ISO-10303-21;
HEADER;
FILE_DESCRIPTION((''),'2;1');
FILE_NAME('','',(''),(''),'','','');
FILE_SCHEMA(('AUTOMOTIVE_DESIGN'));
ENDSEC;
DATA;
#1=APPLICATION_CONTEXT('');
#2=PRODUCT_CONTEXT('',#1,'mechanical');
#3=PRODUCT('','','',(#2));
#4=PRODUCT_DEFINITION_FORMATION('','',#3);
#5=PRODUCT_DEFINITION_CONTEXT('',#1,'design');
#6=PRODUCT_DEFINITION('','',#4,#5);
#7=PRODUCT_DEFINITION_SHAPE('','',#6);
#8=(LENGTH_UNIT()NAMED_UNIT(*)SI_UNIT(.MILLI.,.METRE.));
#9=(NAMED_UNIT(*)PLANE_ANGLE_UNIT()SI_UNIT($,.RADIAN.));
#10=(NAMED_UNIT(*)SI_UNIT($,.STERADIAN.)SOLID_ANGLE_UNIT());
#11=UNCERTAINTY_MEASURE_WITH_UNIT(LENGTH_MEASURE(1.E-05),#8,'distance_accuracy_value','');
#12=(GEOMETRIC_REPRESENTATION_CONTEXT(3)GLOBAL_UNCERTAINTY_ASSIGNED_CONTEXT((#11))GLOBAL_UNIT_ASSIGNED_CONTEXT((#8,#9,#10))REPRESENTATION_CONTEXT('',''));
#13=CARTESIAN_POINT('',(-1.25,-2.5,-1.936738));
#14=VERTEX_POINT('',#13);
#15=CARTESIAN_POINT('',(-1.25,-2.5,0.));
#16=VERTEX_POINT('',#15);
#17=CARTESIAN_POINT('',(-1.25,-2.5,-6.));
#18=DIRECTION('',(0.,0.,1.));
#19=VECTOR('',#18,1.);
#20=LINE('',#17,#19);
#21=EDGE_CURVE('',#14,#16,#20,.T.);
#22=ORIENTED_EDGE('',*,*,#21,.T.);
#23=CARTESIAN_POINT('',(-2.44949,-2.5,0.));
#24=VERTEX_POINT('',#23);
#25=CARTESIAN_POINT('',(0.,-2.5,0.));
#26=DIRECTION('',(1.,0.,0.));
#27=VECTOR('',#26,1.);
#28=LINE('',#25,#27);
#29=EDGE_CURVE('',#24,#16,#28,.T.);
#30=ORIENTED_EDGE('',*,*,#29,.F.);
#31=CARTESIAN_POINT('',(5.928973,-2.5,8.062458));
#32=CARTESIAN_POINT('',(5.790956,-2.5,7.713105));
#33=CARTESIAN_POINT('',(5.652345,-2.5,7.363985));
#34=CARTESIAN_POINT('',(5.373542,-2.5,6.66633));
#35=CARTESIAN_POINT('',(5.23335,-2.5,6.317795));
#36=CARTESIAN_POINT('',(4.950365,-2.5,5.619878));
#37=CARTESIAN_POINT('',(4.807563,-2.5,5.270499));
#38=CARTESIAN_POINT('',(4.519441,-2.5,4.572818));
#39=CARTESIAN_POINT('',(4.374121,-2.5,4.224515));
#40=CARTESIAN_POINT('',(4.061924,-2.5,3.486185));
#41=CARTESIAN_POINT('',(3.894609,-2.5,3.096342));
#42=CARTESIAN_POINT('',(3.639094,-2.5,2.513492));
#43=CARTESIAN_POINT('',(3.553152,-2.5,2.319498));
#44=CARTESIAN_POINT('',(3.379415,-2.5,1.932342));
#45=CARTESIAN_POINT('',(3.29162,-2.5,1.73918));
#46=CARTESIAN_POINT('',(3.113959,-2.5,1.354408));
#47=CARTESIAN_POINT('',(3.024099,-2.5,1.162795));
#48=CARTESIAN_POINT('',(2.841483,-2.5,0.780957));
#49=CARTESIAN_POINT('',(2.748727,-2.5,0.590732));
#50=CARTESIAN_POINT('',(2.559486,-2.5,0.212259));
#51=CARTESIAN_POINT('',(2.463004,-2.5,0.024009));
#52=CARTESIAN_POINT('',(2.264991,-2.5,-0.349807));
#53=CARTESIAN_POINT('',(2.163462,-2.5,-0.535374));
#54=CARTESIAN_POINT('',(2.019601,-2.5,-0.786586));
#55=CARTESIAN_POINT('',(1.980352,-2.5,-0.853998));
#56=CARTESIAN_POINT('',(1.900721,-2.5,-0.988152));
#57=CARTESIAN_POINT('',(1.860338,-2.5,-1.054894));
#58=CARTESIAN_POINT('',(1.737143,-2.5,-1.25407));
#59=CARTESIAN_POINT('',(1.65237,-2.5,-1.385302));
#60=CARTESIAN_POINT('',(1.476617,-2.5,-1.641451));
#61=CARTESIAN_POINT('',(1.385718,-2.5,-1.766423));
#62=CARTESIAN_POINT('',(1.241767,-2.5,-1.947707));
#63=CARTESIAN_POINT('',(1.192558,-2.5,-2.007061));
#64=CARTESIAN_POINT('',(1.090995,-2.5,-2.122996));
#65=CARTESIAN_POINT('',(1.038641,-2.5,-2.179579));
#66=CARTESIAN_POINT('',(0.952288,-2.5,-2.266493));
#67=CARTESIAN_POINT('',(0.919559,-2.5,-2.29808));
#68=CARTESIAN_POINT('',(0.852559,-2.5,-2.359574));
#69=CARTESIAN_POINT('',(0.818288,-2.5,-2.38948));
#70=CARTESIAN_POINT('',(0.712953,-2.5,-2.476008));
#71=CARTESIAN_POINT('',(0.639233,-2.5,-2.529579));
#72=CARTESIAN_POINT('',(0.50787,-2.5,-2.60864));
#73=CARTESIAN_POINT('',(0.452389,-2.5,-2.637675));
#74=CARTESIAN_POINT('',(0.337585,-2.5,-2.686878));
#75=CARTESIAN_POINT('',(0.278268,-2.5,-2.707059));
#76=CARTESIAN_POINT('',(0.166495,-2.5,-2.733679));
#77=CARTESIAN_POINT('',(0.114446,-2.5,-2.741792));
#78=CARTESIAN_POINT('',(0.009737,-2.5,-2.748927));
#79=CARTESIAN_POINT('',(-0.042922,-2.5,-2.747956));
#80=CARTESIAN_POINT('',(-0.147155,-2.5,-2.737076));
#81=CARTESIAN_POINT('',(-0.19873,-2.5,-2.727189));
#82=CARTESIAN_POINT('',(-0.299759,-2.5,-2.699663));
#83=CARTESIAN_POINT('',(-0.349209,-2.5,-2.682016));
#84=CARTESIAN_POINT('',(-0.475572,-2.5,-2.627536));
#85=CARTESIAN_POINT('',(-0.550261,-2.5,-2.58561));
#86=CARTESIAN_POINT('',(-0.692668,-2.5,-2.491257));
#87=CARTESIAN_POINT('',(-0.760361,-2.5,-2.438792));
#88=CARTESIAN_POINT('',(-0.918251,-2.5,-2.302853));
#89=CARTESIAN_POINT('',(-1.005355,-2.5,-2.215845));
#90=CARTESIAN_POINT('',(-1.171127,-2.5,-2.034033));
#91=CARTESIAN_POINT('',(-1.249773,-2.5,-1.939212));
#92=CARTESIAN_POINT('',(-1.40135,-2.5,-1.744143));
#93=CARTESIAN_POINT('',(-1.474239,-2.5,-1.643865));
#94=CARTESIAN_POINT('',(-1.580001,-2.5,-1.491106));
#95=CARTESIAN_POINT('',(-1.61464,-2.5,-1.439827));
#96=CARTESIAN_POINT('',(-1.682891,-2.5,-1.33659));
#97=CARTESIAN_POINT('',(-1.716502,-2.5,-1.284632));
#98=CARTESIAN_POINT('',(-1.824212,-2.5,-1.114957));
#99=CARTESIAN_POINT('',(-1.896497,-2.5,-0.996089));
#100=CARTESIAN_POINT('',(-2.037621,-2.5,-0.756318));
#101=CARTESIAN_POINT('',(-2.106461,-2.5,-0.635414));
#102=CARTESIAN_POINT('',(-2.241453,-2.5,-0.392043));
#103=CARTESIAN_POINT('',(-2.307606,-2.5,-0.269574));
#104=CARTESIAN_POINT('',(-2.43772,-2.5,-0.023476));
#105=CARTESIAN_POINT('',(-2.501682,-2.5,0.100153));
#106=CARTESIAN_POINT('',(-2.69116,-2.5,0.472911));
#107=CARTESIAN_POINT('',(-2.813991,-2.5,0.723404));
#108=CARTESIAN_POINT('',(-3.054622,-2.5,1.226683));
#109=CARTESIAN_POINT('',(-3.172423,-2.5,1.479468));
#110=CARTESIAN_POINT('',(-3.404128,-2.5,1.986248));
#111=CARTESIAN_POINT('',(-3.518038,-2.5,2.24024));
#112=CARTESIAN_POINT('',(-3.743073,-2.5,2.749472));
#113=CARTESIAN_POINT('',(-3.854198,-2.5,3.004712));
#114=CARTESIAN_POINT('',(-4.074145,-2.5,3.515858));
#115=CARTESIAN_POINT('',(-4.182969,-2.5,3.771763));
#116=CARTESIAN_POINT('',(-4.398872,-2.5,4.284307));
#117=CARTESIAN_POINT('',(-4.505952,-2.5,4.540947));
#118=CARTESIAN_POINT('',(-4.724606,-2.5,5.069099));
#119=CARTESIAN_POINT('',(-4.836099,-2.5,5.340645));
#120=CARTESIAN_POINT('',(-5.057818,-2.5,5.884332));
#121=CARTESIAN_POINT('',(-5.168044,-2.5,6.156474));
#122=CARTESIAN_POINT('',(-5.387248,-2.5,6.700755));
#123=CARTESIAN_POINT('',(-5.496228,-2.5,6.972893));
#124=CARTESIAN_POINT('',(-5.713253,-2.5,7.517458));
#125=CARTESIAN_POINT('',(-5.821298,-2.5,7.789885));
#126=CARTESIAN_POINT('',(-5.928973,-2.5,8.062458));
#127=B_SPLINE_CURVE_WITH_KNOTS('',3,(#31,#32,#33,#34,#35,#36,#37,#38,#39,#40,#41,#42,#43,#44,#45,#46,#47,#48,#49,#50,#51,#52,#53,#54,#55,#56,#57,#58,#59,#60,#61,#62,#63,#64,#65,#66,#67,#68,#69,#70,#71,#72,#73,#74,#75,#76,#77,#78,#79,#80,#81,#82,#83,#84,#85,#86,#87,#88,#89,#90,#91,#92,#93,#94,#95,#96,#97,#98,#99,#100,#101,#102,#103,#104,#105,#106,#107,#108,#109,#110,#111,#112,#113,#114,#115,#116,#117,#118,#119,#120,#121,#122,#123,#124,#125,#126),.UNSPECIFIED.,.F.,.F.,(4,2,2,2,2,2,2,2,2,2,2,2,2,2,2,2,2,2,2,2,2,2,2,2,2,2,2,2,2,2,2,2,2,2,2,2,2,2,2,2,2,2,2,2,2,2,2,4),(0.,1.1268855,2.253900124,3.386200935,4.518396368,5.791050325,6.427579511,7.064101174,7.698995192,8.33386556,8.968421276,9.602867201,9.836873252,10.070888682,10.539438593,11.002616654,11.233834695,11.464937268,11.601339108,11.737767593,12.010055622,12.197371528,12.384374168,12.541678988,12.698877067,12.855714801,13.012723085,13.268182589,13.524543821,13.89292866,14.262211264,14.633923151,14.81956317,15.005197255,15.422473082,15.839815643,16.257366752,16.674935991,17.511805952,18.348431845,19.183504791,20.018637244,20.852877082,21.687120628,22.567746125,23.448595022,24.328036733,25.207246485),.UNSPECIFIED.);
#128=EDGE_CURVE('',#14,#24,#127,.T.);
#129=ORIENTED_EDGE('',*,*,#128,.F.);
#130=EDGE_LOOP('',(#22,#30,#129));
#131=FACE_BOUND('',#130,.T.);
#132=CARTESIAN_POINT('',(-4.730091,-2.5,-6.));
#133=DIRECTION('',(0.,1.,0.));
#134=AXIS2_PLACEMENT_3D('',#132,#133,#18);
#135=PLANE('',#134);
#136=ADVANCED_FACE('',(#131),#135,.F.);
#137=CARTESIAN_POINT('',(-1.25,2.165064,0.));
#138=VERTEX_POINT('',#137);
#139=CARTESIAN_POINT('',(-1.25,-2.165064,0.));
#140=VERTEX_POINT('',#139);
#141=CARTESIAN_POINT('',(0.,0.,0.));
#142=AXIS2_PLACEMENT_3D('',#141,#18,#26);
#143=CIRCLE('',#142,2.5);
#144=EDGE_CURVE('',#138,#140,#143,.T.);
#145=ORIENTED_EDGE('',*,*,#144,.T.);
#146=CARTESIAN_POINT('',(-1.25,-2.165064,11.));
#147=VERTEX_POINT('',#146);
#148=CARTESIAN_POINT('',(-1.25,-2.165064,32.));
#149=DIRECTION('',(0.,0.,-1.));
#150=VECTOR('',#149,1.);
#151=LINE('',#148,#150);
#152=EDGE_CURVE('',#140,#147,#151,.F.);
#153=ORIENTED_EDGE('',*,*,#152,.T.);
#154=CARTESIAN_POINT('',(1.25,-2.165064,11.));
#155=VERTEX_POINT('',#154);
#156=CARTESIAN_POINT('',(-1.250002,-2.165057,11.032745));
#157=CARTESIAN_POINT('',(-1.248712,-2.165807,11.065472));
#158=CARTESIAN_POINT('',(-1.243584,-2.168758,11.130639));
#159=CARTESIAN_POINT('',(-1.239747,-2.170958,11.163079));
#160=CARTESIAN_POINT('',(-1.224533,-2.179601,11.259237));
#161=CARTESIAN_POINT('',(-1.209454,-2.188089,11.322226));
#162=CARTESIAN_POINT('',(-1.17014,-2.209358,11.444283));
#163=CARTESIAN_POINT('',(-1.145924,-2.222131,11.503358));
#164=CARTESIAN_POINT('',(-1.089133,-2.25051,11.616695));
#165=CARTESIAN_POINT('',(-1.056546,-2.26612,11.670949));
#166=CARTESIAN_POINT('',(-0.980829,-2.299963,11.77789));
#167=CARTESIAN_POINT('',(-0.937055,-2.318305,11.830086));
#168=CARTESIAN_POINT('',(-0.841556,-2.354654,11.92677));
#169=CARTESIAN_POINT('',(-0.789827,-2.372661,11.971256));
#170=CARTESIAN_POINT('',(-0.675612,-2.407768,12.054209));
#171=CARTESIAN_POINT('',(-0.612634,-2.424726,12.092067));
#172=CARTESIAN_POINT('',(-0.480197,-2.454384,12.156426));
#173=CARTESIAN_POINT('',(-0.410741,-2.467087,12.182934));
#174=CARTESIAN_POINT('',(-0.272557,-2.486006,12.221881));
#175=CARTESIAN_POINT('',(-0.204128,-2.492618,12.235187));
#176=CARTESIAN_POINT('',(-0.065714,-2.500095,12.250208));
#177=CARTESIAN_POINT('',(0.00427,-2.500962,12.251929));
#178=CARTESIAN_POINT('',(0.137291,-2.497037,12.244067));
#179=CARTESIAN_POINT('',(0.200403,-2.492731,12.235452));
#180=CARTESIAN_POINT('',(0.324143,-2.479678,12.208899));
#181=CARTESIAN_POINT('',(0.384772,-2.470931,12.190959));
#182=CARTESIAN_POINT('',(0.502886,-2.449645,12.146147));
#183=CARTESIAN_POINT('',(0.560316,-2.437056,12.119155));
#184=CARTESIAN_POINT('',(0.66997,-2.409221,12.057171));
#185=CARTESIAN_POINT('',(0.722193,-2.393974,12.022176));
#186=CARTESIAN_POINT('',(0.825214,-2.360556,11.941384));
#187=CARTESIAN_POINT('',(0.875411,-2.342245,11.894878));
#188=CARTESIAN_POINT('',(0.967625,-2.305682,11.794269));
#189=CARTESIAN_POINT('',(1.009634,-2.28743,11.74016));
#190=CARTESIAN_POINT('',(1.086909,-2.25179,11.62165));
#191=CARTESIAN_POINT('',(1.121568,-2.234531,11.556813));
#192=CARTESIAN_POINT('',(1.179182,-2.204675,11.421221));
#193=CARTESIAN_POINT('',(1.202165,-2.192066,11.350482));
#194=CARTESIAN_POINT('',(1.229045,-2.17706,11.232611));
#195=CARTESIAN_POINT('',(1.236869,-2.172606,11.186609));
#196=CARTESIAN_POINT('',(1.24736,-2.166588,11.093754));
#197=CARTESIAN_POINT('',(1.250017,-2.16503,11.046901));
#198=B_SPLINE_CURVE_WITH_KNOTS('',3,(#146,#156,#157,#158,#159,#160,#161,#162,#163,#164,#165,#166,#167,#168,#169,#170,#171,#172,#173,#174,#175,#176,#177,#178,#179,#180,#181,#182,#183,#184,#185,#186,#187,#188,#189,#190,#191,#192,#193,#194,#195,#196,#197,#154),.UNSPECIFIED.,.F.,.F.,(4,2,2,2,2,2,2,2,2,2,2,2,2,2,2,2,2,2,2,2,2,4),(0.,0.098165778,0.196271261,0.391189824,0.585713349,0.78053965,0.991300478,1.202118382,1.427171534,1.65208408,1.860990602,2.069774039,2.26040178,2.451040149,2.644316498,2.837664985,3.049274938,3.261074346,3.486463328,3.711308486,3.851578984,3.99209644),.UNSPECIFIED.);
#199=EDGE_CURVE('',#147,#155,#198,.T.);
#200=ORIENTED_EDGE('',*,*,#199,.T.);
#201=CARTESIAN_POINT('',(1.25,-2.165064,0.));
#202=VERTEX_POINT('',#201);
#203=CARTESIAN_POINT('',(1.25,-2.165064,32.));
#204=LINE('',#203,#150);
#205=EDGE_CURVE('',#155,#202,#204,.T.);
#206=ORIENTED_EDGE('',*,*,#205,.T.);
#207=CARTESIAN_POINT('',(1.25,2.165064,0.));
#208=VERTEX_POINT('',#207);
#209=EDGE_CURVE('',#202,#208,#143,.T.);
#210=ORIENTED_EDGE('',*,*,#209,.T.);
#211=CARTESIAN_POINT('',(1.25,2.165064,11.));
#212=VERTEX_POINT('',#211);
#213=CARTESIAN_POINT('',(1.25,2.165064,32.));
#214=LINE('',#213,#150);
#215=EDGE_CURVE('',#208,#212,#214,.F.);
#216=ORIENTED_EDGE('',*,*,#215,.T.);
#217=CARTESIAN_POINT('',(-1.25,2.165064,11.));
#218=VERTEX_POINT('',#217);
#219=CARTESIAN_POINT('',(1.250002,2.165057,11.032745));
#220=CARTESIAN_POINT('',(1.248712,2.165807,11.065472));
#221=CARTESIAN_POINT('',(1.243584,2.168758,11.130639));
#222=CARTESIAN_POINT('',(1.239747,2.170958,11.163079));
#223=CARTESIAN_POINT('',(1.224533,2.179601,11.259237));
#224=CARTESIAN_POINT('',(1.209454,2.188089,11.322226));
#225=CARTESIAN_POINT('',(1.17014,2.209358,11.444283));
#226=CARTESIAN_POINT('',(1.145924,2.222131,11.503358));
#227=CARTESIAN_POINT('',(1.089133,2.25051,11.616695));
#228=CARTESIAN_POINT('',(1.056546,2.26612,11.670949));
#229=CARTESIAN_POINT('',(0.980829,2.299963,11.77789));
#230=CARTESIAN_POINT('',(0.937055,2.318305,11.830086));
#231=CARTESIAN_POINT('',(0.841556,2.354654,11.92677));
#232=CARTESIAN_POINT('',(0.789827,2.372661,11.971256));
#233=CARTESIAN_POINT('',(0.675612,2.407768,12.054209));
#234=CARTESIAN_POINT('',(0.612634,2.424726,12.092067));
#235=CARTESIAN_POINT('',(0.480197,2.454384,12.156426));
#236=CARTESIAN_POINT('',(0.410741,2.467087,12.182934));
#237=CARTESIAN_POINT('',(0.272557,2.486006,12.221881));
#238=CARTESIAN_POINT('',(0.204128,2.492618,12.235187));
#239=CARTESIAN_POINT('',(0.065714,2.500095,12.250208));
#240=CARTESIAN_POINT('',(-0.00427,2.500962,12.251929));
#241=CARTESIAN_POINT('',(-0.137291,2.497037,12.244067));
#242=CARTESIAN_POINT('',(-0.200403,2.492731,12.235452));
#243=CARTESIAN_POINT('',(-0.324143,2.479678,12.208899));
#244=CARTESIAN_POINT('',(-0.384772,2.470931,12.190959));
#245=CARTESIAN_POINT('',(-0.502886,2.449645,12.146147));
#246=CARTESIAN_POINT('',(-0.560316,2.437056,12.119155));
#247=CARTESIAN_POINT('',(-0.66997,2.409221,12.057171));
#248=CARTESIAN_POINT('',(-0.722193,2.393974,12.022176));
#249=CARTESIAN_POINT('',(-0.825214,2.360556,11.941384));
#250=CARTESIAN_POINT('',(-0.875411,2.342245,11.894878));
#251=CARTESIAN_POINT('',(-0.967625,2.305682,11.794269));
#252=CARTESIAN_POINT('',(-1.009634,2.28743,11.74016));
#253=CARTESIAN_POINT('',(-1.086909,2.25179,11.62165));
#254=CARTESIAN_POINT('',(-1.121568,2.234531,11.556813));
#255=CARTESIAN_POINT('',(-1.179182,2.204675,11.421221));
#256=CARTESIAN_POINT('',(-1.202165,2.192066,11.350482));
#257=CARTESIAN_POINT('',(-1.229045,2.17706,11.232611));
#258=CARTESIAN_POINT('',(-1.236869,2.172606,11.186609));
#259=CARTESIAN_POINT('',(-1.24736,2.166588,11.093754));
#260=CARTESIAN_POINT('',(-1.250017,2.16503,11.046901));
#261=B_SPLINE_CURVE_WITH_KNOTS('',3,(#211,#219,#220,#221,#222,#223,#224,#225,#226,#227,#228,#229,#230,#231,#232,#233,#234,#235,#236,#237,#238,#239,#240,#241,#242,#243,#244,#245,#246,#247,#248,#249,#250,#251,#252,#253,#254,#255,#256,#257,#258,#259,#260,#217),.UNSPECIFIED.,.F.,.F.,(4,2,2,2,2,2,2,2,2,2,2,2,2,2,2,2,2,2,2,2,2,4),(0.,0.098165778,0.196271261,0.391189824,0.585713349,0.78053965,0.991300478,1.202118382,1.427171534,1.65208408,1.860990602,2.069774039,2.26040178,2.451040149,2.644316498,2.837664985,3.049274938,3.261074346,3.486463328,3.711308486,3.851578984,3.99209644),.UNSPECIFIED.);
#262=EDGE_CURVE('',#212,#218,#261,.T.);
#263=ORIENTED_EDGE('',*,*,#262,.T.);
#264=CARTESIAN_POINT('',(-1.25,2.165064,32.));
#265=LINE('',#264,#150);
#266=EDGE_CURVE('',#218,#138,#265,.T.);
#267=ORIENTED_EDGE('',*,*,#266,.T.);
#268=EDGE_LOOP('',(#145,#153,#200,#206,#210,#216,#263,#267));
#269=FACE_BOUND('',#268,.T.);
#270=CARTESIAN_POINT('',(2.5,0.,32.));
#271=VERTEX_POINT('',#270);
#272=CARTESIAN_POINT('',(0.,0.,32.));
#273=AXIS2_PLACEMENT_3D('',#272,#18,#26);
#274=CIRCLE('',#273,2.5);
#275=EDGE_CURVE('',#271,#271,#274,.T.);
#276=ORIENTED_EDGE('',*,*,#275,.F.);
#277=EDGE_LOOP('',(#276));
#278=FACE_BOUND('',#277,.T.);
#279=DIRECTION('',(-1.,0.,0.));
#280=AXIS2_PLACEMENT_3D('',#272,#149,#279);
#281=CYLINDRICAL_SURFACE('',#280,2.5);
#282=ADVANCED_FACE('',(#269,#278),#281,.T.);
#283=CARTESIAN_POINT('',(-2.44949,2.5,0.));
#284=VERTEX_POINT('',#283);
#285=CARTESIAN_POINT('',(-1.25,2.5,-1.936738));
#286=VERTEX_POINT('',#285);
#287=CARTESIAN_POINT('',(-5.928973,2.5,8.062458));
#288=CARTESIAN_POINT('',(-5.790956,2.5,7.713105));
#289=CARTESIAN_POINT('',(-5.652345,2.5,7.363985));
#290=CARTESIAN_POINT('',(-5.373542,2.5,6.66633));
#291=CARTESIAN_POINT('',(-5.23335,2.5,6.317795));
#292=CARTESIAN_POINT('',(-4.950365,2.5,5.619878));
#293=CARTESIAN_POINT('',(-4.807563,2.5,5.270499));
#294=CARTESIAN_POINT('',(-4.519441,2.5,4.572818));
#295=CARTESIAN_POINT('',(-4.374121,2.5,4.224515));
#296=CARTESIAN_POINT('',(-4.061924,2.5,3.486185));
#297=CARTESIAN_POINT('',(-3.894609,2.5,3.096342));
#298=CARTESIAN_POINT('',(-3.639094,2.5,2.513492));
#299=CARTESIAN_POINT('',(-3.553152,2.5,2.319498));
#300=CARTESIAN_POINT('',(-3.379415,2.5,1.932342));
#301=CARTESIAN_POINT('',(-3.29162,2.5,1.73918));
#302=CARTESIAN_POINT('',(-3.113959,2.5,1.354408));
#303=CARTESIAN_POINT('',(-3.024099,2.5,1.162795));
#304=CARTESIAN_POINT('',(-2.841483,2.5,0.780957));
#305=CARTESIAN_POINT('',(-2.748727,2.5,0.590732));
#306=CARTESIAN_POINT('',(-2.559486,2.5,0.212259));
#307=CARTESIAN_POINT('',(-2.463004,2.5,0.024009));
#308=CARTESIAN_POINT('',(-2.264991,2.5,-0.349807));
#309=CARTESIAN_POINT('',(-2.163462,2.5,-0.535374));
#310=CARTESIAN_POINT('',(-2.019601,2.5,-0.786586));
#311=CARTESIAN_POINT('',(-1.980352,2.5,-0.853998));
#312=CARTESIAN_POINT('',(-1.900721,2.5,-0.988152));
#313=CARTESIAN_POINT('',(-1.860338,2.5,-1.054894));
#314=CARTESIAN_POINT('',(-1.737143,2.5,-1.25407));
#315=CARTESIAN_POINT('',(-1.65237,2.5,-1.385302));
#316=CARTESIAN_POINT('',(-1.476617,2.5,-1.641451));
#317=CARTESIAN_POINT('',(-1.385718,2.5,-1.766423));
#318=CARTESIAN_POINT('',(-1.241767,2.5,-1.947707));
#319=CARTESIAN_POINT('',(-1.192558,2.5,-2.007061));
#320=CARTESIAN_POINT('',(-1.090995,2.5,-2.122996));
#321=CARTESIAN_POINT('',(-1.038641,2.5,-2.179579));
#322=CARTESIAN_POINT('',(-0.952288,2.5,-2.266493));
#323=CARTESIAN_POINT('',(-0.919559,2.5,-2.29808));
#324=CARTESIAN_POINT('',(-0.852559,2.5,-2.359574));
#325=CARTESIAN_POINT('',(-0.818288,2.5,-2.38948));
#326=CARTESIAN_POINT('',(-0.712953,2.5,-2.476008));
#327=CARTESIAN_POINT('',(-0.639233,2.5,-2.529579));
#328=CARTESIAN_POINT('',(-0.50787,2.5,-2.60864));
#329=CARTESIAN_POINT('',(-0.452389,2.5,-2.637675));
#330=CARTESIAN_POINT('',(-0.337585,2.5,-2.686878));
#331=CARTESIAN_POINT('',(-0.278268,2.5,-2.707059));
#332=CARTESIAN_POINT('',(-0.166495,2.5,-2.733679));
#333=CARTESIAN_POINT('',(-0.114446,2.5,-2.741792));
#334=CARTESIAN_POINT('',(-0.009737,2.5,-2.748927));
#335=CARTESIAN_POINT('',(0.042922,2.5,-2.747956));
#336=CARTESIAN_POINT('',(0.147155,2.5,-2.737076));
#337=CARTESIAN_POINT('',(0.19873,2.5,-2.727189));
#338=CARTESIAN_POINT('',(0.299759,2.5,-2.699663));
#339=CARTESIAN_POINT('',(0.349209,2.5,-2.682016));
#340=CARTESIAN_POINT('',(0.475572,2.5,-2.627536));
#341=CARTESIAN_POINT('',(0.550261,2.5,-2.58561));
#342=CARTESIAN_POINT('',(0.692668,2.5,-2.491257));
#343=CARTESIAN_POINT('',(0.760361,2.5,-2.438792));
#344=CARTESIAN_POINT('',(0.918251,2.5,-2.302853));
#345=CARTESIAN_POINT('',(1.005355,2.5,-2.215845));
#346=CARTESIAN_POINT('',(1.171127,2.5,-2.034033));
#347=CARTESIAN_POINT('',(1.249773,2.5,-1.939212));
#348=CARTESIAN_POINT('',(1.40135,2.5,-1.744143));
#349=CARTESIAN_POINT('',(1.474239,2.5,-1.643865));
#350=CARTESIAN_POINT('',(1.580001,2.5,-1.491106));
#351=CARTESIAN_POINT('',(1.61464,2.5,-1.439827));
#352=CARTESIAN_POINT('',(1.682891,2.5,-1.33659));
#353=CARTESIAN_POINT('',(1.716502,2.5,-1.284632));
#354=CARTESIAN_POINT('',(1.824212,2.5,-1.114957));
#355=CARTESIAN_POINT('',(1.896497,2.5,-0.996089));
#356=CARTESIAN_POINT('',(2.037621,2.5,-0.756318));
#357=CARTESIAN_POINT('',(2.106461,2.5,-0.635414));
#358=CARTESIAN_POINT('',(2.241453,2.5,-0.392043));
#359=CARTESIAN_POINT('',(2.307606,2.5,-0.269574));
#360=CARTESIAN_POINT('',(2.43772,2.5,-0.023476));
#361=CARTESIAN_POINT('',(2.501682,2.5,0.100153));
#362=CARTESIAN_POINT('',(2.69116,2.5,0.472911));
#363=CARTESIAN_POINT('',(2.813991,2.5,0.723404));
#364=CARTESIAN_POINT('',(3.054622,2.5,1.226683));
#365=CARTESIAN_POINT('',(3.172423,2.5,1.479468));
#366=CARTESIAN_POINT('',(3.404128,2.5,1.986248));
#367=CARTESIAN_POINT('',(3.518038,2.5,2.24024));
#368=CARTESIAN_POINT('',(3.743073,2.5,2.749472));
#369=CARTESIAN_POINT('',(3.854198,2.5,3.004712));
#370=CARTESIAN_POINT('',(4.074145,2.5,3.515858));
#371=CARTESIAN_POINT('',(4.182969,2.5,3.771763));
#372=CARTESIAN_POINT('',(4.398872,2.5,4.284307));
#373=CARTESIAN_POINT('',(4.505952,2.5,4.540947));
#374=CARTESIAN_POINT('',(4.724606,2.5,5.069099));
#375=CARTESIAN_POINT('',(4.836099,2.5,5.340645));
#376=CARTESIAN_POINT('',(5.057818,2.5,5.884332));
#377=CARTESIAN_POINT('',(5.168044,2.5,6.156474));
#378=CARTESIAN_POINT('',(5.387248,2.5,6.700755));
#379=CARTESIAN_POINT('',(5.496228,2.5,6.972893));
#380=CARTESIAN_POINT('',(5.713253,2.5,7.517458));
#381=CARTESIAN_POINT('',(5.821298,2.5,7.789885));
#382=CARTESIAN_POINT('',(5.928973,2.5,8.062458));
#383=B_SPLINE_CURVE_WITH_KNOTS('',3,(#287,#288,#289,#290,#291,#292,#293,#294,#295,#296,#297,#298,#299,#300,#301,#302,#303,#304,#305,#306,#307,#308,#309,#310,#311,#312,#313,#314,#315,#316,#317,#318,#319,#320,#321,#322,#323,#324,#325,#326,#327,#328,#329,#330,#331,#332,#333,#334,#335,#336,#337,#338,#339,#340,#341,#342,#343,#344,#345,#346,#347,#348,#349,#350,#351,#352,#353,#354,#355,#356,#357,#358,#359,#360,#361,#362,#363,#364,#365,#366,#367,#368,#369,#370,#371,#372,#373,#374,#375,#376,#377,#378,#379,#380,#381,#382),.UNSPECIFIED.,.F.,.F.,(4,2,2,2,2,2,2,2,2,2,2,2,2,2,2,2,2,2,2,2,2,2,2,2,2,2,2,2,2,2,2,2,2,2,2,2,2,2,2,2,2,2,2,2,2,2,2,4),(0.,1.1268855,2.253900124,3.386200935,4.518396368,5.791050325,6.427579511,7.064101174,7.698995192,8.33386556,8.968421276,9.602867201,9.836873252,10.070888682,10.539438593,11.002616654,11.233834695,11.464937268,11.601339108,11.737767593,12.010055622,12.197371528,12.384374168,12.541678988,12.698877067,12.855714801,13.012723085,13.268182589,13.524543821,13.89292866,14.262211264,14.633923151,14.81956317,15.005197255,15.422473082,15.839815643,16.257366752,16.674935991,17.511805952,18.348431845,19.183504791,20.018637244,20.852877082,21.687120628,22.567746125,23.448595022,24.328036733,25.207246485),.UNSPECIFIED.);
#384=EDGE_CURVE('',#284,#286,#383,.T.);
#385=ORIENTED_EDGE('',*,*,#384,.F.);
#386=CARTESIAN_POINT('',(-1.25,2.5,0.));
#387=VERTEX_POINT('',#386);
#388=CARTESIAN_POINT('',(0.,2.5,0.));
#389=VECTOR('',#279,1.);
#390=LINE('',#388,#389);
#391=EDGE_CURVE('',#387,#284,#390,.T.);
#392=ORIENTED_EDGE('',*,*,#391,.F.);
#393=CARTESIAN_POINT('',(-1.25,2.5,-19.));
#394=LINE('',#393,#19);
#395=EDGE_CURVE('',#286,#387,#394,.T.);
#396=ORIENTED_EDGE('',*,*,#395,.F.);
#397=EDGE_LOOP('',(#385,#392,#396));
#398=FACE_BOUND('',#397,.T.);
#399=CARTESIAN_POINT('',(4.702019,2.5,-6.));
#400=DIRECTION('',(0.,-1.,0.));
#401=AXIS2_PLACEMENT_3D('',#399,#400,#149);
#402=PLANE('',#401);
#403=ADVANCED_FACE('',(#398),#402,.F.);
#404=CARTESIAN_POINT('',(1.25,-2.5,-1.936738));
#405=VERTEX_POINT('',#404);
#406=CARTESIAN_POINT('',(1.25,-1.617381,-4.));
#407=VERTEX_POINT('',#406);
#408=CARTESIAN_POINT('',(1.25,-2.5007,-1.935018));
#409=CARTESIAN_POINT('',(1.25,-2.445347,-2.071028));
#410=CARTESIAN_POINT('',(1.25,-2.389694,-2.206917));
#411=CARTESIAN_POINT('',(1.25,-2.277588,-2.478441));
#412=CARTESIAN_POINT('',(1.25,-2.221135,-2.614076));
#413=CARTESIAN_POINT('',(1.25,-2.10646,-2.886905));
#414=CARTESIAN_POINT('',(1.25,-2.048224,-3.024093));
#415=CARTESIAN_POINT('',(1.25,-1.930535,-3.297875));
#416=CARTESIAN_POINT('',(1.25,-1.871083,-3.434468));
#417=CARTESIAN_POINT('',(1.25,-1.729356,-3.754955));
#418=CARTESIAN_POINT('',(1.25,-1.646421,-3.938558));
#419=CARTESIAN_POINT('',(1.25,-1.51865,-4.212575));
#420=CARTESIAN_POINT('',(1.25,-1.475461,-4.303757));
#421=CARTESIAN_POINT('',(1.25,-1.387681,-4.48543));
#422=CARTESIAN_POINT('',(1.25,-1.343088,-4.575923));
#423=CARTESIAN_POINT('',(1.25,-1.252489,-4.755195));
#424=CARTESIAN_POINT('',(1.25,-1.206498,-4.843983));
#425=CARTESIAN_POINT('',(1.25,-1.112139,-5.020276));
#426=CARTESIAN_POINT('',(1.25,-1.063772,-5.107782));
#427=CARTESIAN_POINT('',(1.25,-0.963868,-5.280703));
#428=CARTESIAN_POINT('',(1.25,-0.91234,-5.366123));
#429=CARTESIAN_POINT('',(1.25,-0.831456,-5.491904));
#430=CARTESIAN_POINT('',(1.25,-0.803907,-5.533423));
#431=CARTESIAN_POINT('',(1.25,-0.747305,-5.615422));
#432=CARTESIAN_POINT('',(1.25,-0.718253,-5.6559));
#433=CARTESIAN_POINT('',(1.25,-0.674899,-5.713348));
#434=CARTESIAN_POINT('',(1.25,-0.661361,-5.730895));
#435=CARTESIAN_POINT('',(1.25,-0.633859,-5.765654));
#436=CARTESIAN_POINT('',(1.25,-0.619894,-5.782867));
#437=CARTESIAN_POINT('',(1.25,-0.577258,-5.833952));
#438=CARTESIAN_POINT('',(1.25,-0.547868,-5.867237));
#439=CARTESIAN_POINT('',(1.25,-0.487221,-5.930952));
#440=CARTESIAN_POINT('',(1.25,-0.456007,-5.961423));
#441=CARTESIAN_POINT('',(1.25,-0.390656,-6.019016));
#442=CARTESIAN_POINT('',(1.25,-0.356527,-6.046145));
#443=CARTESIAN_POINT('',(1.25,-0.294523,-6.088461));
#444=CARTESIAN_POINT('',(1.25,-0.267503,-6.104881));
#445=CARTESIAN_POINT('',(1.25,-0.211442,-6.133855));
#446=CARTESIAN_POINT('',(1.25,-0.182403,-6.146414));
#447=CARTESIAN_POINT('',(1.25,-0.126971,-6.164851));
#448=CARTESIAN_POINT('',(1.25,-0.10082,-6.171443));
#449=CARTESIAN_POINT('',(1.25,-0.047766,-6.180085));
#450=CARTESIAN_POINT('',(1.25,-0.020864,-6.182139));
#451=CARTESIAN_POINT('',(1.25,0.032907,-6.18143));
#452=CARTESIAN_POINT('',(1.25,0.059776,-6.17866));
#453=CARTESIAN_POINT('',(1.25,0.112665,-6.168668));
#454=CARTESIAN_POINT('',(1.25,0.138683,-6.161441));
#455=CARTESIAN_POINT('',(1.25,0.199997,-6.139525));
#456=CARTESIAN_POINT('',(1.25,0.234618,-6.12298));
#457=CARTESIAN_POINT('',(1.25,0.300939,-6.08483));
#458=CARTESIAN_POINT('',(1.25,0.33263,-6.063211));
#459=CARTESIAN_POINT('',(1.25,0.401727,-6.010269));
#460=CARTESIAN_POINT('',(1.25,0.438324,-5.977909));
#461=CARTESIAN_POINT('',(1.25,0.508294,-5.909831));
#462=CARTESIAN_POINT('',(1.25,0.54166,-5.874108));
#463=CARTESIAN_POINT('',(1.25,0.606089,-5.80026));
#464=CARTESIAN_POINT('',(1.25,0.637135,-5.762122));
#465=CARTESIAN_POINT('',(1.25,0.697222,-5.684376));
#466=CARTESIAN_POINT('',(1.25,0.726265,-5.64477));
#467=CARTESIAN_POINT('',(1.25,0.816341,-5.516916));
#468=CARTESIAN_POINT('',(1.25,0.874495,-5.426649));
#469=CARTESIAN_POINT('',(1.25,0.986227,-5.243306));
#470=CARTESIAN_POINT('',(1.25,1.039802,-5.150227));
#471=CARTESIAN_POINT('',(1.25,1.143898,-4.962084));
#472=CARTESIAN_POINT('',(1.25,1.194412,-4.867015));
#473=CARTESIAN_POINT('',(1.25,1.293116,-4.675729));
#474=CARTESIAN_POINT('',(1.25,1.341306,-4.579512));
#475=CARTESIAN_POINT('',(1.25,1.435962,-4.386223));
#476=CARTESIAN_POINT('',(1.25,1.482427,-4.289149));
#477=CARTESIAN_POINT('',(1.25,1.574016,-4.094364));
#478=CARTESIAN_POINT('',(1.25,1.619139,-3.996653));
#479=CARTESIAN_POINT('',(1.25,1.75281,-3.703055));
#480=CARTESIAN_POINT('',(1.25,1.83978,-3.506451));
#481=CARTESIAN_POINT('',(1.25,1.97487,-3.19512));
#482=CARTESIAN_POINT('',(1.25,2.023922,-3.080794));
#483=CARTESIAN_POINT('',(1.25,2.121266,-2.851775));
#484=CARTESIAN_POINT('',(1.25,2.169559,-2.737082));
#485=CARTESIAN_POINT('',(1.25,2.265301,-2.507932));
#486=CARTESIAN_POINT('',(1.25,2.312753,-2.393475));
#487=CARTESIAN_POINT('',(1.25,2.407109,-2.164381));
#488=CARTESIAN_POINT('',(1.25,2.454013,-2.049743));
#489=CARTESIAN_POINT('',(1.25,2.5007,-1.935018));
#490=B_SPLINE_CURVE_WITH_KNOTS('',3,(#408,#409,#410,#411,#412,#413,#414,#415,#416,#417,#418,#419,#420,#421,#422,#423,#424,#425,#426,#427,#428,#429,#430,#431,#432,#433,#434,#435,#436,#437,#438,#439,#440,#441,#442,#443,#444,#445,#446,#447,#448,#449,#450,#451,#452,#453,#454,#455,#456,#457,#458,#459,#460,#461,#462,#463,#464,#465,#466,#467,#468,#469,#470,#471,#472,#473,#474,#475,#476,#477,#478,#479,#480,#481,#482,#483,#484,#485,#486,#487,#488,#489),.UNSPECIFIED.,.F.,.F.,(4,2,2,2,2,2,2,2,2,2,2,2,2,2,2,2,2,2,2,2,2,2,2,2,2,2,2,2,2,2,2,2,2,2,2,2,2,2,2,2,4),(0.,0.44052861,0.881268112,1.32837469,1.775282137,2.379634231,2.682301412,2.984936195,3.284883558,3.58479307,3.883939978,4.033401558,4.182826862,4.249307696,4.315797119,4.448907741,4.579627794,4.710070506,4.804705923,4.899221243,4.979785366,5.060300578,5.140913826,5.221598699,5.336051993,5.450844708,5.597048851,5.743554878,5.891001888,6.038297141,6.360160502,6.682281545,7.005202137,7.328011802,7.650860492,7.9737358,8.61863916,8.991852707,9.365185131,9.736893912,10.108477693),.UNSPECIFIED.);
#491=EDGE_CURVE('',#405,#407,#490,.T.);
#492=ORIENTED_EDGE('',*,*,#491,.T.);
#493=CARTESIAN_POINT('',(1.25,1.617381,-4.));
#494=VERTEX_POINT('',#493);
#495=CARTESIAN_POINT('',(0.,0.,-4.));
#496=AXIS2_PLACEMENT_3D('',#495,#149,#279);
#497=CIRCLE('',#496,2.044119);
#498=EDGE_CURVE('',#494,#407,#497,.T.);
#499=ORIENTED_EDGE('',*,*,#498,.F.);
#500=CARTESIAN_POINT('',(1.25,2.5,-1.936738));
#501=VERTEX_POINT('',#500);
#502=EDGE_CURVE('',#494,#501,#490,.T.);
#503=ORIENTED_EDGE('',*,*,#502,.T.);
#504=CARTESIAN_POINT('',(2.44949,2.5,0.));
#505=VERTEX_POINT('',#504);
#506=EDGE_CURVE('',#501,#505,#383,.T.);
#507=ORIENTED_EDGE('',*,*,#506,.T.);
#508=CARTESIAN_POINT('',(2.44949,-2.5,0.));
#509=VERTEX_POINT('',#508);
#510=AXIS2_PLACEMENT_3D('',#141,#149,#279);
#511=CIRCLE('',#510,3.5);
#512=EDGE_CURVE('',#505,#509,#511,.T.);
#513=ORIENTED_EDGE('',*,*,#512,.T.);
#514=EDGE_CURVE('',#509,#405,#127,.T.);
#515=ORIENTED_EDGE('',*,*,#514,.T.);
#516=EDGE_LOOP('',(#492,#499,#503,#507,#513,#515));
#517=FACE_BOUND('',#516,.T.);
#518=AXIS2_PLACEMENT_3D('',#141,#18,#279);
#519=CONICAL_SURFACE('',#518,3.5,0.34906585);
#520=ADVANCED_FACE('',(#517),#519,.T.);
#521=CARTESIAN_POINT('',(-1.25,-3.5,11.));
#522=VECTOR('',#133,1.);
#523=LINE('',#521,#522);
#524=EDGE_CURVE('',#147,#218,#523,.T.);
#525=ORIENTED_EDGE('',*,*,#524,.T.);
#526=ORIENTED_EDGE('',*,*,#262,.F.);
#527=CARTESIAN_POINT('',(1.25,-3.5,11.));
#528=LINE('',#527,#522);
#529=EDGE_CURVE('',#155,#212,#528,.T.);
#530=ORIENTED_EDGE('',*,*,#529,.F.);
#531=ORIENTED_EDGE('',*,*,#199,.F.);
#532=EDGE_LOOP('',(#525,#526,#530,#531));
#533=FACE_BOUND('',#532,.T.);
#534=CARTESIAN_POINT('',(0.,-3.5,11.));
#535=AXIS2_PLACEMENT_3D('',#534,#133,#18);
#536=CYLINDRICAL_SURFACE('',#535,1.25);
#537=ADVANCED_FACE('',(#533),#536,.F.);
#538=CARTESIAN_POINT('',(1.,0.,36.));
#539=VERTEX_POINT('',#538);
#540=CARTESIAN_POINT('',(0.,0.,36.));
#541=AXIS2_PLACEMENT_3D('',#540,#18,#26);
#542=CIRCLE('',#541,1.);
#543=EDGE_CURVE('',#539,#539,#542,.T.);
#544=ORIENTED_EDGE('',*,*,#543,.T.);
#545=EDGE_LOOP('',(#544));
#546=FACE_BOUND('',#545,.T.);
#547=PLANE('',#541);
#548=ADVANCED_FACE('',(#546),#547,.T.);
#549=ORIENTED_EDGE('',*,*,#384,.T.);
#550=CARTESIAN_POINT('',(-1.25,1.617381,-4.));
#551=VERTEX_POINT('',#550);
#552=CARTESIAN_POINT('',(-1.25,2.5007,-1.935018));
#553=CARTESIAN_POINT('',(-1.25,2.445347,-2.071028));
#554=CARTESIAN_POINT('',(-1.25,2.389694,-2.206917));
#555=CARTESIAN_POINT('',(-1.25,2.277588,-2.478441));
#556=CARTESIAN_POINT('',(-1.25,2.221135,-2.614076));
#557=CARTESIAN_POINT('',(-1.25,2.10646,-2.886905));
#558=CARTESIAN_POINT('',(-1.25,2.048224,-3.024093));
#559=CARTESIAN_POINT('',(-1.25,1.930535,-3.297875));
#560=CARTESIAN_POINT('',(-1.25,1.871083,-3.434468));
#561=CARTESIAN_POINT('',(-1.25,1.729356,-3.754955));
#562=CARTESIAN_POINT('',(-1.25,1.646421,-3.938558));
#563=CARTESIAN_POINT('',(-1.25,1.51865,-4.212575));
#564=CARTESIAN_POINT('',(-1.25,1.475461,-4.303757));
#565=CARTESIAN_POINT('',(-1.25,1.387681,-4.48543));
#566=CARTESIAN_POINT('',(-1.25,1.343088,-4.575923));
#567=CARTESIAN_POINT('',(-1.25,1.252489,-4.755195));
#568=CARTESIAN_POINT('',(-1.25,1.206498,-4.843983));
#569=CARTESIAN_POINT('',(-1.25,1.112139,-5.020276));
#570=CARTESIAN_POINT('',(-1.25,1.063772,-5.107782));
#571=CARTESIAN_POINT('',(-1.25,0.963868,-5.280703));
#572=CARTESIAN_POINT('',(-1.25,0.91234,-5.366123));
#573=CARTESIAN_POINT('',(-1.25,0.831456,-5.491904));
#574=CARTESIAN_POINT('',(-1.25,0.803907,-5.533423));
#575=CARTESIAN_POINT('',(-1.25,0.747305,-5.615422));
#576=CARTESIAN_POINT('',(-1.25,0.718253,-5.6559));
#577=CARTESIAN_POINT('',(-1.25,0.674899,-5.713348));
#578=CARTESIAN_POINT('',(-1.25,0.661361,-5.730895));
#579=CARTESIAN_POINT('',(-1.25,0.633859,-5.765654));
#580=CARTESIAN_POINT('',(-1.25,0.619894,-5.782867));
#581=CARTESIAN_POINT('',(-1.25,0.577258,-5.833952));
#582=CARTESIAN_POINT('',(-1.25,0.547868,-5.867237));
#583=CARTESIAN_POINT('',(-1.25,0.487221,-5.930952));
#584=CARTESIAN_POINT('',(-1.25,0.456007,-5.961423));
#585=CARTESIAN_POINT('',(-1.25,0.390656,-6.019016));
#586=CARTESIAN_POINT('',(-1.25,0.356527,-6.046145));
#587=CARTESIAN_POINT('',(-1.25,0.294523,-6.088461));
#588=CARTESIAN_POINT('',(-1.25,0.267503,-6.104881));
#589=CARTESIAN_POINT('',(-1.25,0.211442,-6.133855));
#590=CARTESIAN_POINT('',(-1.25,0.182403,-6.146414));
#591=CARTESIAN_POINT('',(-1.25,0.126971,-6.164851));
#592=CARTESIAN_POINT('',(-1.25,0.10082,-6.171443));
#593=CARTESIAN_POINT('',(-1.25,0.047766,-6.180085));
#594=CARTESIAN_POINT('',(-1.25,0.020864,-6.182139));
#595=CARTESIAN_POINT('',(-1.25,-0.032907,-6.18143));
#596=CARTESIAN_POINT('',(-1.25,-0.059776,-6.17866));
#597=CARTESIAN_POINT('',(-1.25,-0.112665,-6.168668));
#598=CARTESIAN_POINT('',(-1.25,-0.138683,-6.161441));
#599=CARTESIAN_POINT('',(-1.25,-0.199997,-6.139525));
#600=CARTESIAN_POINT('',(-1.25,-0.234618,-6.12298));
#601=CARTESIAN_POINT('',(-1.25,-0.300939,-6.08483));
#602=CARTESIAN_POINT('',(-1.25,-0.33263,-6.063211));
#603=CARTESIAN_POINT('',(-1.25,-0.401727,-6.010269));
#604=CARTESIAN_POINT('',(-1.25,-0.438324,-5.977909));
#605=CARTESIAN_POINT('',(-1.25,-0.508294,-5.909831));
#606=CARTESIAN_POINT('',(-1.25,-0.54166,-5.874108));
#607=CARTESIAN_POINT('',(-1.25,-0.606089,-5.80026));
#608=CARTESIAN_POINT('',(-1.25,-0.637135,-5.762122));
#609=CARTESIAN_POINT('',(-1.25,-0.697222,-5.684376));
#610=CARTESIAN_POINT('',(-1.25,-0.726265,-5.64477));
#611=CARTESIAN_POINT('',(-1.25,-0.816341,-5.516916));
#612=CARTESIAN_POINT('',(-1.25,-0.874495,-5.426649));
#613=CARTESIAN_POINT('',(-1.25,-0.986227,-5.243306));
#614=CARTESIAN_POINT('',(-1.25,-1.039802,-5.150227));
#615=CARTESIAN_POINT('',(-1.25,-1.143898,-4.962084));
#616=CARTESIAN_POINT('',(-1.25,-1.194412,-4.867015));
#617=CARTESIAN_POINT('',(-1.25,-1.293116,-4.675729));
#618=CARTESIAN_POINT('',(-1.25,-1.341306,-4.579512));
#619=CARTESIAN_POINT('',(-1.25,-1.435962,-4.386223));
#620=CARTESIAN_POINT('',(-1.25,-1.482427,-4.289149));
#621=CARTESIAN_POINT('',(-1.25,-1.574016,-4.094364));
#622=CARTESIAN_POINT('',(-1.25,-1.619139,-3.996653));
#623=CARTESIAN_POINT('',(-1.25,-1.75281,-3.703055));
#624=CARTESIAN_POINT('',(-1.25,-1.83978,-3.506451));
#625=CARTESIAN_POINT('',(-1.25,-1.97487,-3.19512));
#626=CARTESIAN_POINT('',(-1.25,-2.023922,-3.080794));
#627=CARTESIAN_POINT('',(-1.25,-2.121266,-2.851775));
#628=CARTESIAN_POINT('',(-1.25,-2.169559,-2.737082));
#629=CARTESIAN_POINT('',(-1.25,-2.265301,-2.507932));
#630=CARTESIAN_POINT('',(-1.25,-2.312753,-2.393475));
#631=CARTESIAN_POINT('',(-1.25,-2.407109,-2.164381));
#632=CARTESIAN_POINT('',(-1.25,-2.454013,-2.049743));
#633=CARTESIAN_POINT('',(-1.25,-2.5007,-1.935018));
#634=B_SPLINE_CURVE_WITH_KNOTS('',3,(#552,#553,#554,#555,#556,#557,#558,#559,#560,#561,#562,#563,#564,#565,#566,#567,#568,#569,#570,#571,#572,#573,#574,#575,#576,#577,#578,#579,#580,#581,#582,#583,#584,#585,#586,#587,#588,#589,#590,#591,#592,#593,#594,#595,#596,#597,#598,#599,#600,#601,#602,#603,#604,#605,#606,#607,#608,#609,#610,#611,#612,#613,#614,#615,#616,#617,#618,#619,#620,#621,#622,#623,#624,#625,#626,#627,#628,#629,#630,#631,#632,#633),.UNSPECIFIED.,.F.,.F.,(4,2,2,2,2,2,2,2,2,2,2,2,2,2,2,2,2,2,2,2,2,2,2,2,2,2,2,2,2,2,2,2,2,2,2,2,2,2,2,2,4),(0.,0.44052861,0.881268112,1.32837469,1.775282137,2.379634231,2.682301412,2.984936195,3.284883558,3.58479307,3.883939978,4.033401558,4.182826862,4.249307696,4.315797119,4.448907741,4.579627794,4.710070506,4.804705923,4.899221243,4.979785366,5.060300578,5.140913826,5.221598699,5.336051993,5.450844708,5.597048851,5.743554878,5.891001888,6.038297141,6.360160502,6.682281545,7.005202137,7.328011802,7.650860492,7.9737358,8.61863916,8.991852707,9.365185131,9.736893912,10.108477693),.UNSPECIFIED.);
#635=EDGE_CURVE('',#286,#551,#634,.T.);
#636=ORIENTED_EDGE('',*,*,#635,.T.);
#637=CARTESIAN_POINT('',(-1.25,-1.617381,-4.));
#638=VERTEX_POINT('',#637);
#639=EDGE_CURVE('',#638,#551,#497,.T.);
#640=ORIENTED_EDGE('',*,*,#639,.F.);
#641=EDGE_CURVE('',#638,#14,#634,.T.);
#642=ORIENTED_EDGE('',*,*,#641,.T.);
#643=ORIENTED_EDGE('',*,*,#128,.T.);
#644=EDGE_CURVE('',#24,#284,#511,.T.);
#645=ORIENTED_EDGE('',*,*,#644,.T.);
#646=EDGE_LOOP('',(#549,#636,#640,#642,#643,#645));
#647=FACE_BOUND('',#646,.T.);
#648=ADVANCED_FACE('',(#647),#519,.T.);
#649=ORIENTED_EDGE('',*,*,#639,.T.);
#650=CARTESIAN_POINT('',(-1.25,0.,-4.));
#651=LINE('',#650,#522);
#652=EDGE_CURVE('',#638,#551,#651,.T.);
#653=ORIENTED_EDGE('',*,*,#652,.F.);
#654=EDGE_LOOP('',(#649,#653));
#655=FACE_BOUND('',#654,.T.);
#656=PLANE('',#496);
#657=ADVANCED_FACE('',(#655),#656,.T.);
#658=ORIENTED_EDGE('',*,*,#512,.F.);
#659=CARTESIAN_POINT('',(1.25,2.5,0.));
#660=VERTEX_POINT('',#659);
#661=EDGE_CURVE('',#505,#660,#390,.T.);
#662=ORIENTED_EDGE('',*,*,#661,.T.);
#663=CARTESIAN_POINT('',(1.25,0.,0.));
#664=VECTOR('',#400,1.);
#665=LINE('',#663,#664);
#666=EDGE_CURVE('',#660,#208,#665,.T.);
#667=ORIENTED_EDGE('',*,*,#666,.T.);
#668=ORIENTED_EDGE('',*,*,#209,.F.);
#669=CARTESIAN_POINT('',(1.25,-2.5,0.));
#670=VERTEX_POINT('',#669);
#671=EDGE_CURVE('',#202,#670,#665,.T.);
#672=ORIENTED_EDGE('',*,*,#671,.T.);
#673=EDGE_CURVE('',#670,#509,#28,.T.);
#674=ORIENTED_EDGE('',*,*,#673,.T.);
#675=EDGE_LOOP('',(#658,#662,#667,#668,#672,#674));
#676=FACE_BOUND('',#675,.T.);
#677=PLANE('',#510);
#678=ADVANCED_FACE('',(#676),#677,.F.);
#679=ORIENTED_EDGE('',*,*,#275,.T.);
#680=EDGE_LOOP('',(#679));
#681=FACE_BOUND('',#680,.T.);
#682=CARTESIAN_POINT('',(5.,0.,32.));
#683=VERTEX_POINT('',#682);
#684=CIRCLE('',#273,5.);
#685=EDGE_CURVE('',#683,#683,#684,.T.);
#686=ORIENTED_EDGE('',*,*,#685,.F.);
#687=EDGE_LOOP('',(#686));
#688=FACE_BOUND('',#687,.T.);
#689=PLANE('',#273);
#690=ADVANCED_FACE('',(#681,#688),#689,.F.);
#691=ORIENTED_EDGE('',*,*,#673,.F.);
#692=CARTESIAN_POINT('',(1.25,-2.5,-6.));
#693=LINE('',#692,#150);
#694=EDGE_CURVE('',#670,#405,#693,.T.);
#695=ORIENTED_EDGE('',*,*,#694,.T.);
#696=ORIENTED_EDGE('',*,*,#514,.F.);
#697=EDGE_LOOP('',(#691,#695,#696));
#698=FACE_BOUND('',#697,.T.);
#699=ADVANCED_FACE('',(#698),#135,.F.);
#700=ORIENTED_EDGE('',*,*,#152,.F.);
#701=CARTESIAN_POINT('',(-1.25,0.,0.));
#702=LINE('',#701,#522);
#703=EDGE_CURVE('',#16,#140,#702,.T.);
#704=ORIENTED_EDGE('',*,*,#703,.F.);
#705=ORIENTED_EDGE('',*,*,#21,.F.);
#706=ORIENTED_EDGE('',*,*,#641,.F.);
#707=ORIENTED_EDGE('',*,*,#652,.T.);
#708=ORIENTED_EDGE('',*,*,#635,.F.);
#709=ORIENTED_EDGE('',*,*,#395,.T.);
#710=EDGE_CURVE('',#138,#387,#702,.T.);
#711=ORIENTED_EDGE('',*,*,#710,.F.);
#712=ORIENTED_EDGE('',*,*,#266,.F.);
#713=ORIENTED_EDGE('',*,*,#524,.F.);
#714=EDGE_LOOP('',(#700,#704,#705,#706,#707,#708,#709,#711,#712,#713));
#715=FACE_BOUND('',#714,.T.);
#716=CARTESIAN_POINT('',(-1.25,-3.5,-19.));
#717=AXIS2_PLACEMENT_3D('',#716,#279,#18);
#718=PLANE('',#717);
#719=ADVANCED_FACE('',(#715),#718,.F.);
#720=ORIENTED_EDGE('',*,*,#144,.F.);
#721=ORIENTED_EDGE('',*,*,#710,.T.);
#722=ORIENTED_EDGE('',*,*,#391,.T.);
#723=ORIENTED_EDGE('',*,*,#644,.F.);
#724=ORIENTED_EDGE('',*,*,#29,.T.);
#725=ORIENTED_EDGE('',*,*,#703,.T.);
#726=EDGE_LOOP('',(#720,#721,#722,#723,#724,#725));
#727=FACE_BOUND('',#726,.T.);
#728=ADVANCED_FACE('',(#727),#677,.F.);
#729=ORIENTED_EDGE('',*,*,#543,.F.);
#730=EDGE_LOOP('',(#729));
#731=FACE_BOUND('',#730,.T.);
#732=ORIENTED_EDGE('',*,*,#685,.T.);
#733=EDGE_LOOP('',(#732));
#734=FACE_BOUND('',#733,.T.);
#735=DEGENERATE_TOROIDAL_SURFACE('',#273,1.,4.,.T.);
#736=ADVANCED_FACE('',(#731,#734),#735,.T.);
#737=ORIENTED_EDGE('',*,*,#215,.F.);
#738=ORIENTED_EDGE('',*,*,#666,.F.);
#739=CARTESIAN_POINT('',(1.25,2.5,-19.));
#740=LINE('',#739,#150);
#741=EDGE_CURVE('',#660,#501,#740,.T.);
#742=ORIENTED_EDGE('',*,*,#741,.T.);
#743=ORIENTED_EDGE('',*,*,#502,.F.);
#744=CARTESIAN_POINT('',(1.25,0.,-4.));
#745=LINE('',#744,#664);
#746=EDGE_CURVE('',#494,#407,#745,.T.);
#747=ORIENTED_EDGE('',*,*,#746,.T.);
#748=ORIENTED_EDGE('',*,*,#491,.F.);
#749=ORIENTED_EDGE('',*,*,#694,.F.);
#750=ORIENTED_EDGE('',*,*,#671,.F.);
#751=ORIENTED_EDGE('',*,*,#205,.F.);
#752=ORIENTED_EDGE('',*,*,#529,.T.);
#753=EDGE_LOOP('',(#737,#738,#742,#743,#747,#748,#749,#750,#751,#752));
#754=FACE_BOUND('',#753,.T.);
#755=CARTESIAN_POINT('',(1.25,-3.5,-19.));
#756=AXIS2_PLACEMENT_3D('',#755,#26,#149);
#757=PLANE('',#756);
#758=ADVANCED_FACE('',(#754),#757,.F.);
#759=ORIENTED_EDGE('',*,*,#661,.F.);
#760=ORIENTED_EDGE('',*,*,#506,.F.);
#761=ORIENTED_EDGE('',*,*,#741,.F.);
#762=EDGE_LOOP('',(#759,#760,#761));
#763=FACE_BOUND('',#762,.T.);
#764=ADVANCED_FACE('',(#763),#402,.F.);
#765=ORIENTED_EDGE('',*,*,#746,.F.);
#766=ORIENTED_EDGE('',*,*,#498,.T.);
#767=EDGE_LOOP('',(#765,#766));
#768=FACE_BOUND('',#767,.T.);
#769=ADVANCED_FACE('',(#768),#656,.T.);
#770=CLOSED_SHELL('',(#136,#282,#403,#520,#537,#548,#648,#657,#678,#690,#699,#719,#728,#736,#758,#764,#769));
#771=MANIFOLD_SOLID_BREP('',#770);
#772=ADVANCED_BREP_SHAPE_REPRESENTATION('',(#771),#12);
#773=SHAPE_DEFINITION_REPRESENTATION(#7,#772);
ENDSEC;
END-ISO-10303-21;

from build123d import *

# Parameters (mm, degrees)
SKETCH2_R           = 2.5
BOSS_EXTRUDE1_DEPTH = 32
BOSS_EXTRUDE2_DEPTH = 4
BOSS_EXTRUDE2_TAPER = 20
CUT_EXTRUDE1_DEPTH  = 6
CUT_EXTRUDE2_DEPTH  = 6
SKETCH6_R           = 5
BOSS_EXTRUDE3_DEPTH = 4
FILLET1_R           = 4


with BuildPart() as part:
    # Sketch2 → Boss-Extrude1 (new body)
    with BuildSketch(Plane.XY):
        Circle(SKETCH2_R)
    extrude(amount=BOSS_EXTRUDE1_DEPTH)

    # Sketch3 → Boss-Extrude2 (add)
    with BuildSketch(Plane(origin=(0, 0, 0), x_dir=(-1, 0, 0), z_dir=(0, 0, -1))):
        with BuildLine():
            ThreePointArc((2.910177967, 1.944444444), (0, 3.5), (-2.910177967, 1.944444444))
            ThreePointArc((-2.910177967, 1.944444444), (-3.5, 0), (-2.910177967, -1.944444444))
            ThreePointArc((-2.910177967, -1.944444444), (0, -3.5), (2.910177967, -1.944444444))
            ThreePointArc((2.910177967, -1.944444444), (3.349300142, -1.015966809), (3.5, 0))
            ThreePointArc((3.5, 0), (3.349300142, 1.015966809), (2.910177967, 1.944444444))
        make_face()
    extrude(amount=BOSS_EXTRUDE2_DEPTH, taper=BOSS_EXTRUDE2_TAPER)

    # Sketch4 → Cut-Extrude1 (cut)
    with BuildSketch(Plane.XY):
        Polygon((4.702019348, 2.5), (-6.119643092, 2.5), (-4.730091105, -2.5), (5.600315582, -2.5), (7.628500047, -1.168486898), (5.144149526, -5.126604677), (-5.530136189, -4.719564196), (-7.70569738, 3.519496572), (-2.540721352, 4.883331809), (4.16163802, 4.824833286), (4.784967696, 2.464223482), align=None)
    extrude(amount=-CUT_EXTRUDE1_DEPTH, mode=Mode.SUBTRACT)

    # Sketch5 → Cut-Extrude2 (cut)
    with BuildSketch(Plane(origin=(0, 2.5, 0), x_dir=(1, 0, 0), z_dir=(0, 1, 0))):
        with BuildLine():
            Line((1.25, 19), (1.25, -11))
            ThreePointArc((1.25, -11), (0, -12.25), (-1.25, -11))
            Line((-1.25, -11), (-1.25, 19))
            ThreePointArc((-1.25, 19), (0, 20.25), (1.25, 19))
        make_face()
    extrude(amount=-CUT_EXTRUDE2_DEPTH, mode=Mode.SUBTRACT)

    # Sketch6 → Boss-Extrude3 (add)
    with BuildSketch(Plane.XY.offset(32)):
        Circle(SKETCH6_R)
    extrude(amount=BOSS_EXTRUDE3_DEPTH)

    # Fillet1
    fillet1_edges = [part.edges().sort_by_distance(p)[0] for p in [
        (-5, 0, 36),
    ]]
    fillet(fillet1_edges, radius=FILLET1_R - 0.0001)  # a hair under: the kernel refuses the full size


solid = part.part
